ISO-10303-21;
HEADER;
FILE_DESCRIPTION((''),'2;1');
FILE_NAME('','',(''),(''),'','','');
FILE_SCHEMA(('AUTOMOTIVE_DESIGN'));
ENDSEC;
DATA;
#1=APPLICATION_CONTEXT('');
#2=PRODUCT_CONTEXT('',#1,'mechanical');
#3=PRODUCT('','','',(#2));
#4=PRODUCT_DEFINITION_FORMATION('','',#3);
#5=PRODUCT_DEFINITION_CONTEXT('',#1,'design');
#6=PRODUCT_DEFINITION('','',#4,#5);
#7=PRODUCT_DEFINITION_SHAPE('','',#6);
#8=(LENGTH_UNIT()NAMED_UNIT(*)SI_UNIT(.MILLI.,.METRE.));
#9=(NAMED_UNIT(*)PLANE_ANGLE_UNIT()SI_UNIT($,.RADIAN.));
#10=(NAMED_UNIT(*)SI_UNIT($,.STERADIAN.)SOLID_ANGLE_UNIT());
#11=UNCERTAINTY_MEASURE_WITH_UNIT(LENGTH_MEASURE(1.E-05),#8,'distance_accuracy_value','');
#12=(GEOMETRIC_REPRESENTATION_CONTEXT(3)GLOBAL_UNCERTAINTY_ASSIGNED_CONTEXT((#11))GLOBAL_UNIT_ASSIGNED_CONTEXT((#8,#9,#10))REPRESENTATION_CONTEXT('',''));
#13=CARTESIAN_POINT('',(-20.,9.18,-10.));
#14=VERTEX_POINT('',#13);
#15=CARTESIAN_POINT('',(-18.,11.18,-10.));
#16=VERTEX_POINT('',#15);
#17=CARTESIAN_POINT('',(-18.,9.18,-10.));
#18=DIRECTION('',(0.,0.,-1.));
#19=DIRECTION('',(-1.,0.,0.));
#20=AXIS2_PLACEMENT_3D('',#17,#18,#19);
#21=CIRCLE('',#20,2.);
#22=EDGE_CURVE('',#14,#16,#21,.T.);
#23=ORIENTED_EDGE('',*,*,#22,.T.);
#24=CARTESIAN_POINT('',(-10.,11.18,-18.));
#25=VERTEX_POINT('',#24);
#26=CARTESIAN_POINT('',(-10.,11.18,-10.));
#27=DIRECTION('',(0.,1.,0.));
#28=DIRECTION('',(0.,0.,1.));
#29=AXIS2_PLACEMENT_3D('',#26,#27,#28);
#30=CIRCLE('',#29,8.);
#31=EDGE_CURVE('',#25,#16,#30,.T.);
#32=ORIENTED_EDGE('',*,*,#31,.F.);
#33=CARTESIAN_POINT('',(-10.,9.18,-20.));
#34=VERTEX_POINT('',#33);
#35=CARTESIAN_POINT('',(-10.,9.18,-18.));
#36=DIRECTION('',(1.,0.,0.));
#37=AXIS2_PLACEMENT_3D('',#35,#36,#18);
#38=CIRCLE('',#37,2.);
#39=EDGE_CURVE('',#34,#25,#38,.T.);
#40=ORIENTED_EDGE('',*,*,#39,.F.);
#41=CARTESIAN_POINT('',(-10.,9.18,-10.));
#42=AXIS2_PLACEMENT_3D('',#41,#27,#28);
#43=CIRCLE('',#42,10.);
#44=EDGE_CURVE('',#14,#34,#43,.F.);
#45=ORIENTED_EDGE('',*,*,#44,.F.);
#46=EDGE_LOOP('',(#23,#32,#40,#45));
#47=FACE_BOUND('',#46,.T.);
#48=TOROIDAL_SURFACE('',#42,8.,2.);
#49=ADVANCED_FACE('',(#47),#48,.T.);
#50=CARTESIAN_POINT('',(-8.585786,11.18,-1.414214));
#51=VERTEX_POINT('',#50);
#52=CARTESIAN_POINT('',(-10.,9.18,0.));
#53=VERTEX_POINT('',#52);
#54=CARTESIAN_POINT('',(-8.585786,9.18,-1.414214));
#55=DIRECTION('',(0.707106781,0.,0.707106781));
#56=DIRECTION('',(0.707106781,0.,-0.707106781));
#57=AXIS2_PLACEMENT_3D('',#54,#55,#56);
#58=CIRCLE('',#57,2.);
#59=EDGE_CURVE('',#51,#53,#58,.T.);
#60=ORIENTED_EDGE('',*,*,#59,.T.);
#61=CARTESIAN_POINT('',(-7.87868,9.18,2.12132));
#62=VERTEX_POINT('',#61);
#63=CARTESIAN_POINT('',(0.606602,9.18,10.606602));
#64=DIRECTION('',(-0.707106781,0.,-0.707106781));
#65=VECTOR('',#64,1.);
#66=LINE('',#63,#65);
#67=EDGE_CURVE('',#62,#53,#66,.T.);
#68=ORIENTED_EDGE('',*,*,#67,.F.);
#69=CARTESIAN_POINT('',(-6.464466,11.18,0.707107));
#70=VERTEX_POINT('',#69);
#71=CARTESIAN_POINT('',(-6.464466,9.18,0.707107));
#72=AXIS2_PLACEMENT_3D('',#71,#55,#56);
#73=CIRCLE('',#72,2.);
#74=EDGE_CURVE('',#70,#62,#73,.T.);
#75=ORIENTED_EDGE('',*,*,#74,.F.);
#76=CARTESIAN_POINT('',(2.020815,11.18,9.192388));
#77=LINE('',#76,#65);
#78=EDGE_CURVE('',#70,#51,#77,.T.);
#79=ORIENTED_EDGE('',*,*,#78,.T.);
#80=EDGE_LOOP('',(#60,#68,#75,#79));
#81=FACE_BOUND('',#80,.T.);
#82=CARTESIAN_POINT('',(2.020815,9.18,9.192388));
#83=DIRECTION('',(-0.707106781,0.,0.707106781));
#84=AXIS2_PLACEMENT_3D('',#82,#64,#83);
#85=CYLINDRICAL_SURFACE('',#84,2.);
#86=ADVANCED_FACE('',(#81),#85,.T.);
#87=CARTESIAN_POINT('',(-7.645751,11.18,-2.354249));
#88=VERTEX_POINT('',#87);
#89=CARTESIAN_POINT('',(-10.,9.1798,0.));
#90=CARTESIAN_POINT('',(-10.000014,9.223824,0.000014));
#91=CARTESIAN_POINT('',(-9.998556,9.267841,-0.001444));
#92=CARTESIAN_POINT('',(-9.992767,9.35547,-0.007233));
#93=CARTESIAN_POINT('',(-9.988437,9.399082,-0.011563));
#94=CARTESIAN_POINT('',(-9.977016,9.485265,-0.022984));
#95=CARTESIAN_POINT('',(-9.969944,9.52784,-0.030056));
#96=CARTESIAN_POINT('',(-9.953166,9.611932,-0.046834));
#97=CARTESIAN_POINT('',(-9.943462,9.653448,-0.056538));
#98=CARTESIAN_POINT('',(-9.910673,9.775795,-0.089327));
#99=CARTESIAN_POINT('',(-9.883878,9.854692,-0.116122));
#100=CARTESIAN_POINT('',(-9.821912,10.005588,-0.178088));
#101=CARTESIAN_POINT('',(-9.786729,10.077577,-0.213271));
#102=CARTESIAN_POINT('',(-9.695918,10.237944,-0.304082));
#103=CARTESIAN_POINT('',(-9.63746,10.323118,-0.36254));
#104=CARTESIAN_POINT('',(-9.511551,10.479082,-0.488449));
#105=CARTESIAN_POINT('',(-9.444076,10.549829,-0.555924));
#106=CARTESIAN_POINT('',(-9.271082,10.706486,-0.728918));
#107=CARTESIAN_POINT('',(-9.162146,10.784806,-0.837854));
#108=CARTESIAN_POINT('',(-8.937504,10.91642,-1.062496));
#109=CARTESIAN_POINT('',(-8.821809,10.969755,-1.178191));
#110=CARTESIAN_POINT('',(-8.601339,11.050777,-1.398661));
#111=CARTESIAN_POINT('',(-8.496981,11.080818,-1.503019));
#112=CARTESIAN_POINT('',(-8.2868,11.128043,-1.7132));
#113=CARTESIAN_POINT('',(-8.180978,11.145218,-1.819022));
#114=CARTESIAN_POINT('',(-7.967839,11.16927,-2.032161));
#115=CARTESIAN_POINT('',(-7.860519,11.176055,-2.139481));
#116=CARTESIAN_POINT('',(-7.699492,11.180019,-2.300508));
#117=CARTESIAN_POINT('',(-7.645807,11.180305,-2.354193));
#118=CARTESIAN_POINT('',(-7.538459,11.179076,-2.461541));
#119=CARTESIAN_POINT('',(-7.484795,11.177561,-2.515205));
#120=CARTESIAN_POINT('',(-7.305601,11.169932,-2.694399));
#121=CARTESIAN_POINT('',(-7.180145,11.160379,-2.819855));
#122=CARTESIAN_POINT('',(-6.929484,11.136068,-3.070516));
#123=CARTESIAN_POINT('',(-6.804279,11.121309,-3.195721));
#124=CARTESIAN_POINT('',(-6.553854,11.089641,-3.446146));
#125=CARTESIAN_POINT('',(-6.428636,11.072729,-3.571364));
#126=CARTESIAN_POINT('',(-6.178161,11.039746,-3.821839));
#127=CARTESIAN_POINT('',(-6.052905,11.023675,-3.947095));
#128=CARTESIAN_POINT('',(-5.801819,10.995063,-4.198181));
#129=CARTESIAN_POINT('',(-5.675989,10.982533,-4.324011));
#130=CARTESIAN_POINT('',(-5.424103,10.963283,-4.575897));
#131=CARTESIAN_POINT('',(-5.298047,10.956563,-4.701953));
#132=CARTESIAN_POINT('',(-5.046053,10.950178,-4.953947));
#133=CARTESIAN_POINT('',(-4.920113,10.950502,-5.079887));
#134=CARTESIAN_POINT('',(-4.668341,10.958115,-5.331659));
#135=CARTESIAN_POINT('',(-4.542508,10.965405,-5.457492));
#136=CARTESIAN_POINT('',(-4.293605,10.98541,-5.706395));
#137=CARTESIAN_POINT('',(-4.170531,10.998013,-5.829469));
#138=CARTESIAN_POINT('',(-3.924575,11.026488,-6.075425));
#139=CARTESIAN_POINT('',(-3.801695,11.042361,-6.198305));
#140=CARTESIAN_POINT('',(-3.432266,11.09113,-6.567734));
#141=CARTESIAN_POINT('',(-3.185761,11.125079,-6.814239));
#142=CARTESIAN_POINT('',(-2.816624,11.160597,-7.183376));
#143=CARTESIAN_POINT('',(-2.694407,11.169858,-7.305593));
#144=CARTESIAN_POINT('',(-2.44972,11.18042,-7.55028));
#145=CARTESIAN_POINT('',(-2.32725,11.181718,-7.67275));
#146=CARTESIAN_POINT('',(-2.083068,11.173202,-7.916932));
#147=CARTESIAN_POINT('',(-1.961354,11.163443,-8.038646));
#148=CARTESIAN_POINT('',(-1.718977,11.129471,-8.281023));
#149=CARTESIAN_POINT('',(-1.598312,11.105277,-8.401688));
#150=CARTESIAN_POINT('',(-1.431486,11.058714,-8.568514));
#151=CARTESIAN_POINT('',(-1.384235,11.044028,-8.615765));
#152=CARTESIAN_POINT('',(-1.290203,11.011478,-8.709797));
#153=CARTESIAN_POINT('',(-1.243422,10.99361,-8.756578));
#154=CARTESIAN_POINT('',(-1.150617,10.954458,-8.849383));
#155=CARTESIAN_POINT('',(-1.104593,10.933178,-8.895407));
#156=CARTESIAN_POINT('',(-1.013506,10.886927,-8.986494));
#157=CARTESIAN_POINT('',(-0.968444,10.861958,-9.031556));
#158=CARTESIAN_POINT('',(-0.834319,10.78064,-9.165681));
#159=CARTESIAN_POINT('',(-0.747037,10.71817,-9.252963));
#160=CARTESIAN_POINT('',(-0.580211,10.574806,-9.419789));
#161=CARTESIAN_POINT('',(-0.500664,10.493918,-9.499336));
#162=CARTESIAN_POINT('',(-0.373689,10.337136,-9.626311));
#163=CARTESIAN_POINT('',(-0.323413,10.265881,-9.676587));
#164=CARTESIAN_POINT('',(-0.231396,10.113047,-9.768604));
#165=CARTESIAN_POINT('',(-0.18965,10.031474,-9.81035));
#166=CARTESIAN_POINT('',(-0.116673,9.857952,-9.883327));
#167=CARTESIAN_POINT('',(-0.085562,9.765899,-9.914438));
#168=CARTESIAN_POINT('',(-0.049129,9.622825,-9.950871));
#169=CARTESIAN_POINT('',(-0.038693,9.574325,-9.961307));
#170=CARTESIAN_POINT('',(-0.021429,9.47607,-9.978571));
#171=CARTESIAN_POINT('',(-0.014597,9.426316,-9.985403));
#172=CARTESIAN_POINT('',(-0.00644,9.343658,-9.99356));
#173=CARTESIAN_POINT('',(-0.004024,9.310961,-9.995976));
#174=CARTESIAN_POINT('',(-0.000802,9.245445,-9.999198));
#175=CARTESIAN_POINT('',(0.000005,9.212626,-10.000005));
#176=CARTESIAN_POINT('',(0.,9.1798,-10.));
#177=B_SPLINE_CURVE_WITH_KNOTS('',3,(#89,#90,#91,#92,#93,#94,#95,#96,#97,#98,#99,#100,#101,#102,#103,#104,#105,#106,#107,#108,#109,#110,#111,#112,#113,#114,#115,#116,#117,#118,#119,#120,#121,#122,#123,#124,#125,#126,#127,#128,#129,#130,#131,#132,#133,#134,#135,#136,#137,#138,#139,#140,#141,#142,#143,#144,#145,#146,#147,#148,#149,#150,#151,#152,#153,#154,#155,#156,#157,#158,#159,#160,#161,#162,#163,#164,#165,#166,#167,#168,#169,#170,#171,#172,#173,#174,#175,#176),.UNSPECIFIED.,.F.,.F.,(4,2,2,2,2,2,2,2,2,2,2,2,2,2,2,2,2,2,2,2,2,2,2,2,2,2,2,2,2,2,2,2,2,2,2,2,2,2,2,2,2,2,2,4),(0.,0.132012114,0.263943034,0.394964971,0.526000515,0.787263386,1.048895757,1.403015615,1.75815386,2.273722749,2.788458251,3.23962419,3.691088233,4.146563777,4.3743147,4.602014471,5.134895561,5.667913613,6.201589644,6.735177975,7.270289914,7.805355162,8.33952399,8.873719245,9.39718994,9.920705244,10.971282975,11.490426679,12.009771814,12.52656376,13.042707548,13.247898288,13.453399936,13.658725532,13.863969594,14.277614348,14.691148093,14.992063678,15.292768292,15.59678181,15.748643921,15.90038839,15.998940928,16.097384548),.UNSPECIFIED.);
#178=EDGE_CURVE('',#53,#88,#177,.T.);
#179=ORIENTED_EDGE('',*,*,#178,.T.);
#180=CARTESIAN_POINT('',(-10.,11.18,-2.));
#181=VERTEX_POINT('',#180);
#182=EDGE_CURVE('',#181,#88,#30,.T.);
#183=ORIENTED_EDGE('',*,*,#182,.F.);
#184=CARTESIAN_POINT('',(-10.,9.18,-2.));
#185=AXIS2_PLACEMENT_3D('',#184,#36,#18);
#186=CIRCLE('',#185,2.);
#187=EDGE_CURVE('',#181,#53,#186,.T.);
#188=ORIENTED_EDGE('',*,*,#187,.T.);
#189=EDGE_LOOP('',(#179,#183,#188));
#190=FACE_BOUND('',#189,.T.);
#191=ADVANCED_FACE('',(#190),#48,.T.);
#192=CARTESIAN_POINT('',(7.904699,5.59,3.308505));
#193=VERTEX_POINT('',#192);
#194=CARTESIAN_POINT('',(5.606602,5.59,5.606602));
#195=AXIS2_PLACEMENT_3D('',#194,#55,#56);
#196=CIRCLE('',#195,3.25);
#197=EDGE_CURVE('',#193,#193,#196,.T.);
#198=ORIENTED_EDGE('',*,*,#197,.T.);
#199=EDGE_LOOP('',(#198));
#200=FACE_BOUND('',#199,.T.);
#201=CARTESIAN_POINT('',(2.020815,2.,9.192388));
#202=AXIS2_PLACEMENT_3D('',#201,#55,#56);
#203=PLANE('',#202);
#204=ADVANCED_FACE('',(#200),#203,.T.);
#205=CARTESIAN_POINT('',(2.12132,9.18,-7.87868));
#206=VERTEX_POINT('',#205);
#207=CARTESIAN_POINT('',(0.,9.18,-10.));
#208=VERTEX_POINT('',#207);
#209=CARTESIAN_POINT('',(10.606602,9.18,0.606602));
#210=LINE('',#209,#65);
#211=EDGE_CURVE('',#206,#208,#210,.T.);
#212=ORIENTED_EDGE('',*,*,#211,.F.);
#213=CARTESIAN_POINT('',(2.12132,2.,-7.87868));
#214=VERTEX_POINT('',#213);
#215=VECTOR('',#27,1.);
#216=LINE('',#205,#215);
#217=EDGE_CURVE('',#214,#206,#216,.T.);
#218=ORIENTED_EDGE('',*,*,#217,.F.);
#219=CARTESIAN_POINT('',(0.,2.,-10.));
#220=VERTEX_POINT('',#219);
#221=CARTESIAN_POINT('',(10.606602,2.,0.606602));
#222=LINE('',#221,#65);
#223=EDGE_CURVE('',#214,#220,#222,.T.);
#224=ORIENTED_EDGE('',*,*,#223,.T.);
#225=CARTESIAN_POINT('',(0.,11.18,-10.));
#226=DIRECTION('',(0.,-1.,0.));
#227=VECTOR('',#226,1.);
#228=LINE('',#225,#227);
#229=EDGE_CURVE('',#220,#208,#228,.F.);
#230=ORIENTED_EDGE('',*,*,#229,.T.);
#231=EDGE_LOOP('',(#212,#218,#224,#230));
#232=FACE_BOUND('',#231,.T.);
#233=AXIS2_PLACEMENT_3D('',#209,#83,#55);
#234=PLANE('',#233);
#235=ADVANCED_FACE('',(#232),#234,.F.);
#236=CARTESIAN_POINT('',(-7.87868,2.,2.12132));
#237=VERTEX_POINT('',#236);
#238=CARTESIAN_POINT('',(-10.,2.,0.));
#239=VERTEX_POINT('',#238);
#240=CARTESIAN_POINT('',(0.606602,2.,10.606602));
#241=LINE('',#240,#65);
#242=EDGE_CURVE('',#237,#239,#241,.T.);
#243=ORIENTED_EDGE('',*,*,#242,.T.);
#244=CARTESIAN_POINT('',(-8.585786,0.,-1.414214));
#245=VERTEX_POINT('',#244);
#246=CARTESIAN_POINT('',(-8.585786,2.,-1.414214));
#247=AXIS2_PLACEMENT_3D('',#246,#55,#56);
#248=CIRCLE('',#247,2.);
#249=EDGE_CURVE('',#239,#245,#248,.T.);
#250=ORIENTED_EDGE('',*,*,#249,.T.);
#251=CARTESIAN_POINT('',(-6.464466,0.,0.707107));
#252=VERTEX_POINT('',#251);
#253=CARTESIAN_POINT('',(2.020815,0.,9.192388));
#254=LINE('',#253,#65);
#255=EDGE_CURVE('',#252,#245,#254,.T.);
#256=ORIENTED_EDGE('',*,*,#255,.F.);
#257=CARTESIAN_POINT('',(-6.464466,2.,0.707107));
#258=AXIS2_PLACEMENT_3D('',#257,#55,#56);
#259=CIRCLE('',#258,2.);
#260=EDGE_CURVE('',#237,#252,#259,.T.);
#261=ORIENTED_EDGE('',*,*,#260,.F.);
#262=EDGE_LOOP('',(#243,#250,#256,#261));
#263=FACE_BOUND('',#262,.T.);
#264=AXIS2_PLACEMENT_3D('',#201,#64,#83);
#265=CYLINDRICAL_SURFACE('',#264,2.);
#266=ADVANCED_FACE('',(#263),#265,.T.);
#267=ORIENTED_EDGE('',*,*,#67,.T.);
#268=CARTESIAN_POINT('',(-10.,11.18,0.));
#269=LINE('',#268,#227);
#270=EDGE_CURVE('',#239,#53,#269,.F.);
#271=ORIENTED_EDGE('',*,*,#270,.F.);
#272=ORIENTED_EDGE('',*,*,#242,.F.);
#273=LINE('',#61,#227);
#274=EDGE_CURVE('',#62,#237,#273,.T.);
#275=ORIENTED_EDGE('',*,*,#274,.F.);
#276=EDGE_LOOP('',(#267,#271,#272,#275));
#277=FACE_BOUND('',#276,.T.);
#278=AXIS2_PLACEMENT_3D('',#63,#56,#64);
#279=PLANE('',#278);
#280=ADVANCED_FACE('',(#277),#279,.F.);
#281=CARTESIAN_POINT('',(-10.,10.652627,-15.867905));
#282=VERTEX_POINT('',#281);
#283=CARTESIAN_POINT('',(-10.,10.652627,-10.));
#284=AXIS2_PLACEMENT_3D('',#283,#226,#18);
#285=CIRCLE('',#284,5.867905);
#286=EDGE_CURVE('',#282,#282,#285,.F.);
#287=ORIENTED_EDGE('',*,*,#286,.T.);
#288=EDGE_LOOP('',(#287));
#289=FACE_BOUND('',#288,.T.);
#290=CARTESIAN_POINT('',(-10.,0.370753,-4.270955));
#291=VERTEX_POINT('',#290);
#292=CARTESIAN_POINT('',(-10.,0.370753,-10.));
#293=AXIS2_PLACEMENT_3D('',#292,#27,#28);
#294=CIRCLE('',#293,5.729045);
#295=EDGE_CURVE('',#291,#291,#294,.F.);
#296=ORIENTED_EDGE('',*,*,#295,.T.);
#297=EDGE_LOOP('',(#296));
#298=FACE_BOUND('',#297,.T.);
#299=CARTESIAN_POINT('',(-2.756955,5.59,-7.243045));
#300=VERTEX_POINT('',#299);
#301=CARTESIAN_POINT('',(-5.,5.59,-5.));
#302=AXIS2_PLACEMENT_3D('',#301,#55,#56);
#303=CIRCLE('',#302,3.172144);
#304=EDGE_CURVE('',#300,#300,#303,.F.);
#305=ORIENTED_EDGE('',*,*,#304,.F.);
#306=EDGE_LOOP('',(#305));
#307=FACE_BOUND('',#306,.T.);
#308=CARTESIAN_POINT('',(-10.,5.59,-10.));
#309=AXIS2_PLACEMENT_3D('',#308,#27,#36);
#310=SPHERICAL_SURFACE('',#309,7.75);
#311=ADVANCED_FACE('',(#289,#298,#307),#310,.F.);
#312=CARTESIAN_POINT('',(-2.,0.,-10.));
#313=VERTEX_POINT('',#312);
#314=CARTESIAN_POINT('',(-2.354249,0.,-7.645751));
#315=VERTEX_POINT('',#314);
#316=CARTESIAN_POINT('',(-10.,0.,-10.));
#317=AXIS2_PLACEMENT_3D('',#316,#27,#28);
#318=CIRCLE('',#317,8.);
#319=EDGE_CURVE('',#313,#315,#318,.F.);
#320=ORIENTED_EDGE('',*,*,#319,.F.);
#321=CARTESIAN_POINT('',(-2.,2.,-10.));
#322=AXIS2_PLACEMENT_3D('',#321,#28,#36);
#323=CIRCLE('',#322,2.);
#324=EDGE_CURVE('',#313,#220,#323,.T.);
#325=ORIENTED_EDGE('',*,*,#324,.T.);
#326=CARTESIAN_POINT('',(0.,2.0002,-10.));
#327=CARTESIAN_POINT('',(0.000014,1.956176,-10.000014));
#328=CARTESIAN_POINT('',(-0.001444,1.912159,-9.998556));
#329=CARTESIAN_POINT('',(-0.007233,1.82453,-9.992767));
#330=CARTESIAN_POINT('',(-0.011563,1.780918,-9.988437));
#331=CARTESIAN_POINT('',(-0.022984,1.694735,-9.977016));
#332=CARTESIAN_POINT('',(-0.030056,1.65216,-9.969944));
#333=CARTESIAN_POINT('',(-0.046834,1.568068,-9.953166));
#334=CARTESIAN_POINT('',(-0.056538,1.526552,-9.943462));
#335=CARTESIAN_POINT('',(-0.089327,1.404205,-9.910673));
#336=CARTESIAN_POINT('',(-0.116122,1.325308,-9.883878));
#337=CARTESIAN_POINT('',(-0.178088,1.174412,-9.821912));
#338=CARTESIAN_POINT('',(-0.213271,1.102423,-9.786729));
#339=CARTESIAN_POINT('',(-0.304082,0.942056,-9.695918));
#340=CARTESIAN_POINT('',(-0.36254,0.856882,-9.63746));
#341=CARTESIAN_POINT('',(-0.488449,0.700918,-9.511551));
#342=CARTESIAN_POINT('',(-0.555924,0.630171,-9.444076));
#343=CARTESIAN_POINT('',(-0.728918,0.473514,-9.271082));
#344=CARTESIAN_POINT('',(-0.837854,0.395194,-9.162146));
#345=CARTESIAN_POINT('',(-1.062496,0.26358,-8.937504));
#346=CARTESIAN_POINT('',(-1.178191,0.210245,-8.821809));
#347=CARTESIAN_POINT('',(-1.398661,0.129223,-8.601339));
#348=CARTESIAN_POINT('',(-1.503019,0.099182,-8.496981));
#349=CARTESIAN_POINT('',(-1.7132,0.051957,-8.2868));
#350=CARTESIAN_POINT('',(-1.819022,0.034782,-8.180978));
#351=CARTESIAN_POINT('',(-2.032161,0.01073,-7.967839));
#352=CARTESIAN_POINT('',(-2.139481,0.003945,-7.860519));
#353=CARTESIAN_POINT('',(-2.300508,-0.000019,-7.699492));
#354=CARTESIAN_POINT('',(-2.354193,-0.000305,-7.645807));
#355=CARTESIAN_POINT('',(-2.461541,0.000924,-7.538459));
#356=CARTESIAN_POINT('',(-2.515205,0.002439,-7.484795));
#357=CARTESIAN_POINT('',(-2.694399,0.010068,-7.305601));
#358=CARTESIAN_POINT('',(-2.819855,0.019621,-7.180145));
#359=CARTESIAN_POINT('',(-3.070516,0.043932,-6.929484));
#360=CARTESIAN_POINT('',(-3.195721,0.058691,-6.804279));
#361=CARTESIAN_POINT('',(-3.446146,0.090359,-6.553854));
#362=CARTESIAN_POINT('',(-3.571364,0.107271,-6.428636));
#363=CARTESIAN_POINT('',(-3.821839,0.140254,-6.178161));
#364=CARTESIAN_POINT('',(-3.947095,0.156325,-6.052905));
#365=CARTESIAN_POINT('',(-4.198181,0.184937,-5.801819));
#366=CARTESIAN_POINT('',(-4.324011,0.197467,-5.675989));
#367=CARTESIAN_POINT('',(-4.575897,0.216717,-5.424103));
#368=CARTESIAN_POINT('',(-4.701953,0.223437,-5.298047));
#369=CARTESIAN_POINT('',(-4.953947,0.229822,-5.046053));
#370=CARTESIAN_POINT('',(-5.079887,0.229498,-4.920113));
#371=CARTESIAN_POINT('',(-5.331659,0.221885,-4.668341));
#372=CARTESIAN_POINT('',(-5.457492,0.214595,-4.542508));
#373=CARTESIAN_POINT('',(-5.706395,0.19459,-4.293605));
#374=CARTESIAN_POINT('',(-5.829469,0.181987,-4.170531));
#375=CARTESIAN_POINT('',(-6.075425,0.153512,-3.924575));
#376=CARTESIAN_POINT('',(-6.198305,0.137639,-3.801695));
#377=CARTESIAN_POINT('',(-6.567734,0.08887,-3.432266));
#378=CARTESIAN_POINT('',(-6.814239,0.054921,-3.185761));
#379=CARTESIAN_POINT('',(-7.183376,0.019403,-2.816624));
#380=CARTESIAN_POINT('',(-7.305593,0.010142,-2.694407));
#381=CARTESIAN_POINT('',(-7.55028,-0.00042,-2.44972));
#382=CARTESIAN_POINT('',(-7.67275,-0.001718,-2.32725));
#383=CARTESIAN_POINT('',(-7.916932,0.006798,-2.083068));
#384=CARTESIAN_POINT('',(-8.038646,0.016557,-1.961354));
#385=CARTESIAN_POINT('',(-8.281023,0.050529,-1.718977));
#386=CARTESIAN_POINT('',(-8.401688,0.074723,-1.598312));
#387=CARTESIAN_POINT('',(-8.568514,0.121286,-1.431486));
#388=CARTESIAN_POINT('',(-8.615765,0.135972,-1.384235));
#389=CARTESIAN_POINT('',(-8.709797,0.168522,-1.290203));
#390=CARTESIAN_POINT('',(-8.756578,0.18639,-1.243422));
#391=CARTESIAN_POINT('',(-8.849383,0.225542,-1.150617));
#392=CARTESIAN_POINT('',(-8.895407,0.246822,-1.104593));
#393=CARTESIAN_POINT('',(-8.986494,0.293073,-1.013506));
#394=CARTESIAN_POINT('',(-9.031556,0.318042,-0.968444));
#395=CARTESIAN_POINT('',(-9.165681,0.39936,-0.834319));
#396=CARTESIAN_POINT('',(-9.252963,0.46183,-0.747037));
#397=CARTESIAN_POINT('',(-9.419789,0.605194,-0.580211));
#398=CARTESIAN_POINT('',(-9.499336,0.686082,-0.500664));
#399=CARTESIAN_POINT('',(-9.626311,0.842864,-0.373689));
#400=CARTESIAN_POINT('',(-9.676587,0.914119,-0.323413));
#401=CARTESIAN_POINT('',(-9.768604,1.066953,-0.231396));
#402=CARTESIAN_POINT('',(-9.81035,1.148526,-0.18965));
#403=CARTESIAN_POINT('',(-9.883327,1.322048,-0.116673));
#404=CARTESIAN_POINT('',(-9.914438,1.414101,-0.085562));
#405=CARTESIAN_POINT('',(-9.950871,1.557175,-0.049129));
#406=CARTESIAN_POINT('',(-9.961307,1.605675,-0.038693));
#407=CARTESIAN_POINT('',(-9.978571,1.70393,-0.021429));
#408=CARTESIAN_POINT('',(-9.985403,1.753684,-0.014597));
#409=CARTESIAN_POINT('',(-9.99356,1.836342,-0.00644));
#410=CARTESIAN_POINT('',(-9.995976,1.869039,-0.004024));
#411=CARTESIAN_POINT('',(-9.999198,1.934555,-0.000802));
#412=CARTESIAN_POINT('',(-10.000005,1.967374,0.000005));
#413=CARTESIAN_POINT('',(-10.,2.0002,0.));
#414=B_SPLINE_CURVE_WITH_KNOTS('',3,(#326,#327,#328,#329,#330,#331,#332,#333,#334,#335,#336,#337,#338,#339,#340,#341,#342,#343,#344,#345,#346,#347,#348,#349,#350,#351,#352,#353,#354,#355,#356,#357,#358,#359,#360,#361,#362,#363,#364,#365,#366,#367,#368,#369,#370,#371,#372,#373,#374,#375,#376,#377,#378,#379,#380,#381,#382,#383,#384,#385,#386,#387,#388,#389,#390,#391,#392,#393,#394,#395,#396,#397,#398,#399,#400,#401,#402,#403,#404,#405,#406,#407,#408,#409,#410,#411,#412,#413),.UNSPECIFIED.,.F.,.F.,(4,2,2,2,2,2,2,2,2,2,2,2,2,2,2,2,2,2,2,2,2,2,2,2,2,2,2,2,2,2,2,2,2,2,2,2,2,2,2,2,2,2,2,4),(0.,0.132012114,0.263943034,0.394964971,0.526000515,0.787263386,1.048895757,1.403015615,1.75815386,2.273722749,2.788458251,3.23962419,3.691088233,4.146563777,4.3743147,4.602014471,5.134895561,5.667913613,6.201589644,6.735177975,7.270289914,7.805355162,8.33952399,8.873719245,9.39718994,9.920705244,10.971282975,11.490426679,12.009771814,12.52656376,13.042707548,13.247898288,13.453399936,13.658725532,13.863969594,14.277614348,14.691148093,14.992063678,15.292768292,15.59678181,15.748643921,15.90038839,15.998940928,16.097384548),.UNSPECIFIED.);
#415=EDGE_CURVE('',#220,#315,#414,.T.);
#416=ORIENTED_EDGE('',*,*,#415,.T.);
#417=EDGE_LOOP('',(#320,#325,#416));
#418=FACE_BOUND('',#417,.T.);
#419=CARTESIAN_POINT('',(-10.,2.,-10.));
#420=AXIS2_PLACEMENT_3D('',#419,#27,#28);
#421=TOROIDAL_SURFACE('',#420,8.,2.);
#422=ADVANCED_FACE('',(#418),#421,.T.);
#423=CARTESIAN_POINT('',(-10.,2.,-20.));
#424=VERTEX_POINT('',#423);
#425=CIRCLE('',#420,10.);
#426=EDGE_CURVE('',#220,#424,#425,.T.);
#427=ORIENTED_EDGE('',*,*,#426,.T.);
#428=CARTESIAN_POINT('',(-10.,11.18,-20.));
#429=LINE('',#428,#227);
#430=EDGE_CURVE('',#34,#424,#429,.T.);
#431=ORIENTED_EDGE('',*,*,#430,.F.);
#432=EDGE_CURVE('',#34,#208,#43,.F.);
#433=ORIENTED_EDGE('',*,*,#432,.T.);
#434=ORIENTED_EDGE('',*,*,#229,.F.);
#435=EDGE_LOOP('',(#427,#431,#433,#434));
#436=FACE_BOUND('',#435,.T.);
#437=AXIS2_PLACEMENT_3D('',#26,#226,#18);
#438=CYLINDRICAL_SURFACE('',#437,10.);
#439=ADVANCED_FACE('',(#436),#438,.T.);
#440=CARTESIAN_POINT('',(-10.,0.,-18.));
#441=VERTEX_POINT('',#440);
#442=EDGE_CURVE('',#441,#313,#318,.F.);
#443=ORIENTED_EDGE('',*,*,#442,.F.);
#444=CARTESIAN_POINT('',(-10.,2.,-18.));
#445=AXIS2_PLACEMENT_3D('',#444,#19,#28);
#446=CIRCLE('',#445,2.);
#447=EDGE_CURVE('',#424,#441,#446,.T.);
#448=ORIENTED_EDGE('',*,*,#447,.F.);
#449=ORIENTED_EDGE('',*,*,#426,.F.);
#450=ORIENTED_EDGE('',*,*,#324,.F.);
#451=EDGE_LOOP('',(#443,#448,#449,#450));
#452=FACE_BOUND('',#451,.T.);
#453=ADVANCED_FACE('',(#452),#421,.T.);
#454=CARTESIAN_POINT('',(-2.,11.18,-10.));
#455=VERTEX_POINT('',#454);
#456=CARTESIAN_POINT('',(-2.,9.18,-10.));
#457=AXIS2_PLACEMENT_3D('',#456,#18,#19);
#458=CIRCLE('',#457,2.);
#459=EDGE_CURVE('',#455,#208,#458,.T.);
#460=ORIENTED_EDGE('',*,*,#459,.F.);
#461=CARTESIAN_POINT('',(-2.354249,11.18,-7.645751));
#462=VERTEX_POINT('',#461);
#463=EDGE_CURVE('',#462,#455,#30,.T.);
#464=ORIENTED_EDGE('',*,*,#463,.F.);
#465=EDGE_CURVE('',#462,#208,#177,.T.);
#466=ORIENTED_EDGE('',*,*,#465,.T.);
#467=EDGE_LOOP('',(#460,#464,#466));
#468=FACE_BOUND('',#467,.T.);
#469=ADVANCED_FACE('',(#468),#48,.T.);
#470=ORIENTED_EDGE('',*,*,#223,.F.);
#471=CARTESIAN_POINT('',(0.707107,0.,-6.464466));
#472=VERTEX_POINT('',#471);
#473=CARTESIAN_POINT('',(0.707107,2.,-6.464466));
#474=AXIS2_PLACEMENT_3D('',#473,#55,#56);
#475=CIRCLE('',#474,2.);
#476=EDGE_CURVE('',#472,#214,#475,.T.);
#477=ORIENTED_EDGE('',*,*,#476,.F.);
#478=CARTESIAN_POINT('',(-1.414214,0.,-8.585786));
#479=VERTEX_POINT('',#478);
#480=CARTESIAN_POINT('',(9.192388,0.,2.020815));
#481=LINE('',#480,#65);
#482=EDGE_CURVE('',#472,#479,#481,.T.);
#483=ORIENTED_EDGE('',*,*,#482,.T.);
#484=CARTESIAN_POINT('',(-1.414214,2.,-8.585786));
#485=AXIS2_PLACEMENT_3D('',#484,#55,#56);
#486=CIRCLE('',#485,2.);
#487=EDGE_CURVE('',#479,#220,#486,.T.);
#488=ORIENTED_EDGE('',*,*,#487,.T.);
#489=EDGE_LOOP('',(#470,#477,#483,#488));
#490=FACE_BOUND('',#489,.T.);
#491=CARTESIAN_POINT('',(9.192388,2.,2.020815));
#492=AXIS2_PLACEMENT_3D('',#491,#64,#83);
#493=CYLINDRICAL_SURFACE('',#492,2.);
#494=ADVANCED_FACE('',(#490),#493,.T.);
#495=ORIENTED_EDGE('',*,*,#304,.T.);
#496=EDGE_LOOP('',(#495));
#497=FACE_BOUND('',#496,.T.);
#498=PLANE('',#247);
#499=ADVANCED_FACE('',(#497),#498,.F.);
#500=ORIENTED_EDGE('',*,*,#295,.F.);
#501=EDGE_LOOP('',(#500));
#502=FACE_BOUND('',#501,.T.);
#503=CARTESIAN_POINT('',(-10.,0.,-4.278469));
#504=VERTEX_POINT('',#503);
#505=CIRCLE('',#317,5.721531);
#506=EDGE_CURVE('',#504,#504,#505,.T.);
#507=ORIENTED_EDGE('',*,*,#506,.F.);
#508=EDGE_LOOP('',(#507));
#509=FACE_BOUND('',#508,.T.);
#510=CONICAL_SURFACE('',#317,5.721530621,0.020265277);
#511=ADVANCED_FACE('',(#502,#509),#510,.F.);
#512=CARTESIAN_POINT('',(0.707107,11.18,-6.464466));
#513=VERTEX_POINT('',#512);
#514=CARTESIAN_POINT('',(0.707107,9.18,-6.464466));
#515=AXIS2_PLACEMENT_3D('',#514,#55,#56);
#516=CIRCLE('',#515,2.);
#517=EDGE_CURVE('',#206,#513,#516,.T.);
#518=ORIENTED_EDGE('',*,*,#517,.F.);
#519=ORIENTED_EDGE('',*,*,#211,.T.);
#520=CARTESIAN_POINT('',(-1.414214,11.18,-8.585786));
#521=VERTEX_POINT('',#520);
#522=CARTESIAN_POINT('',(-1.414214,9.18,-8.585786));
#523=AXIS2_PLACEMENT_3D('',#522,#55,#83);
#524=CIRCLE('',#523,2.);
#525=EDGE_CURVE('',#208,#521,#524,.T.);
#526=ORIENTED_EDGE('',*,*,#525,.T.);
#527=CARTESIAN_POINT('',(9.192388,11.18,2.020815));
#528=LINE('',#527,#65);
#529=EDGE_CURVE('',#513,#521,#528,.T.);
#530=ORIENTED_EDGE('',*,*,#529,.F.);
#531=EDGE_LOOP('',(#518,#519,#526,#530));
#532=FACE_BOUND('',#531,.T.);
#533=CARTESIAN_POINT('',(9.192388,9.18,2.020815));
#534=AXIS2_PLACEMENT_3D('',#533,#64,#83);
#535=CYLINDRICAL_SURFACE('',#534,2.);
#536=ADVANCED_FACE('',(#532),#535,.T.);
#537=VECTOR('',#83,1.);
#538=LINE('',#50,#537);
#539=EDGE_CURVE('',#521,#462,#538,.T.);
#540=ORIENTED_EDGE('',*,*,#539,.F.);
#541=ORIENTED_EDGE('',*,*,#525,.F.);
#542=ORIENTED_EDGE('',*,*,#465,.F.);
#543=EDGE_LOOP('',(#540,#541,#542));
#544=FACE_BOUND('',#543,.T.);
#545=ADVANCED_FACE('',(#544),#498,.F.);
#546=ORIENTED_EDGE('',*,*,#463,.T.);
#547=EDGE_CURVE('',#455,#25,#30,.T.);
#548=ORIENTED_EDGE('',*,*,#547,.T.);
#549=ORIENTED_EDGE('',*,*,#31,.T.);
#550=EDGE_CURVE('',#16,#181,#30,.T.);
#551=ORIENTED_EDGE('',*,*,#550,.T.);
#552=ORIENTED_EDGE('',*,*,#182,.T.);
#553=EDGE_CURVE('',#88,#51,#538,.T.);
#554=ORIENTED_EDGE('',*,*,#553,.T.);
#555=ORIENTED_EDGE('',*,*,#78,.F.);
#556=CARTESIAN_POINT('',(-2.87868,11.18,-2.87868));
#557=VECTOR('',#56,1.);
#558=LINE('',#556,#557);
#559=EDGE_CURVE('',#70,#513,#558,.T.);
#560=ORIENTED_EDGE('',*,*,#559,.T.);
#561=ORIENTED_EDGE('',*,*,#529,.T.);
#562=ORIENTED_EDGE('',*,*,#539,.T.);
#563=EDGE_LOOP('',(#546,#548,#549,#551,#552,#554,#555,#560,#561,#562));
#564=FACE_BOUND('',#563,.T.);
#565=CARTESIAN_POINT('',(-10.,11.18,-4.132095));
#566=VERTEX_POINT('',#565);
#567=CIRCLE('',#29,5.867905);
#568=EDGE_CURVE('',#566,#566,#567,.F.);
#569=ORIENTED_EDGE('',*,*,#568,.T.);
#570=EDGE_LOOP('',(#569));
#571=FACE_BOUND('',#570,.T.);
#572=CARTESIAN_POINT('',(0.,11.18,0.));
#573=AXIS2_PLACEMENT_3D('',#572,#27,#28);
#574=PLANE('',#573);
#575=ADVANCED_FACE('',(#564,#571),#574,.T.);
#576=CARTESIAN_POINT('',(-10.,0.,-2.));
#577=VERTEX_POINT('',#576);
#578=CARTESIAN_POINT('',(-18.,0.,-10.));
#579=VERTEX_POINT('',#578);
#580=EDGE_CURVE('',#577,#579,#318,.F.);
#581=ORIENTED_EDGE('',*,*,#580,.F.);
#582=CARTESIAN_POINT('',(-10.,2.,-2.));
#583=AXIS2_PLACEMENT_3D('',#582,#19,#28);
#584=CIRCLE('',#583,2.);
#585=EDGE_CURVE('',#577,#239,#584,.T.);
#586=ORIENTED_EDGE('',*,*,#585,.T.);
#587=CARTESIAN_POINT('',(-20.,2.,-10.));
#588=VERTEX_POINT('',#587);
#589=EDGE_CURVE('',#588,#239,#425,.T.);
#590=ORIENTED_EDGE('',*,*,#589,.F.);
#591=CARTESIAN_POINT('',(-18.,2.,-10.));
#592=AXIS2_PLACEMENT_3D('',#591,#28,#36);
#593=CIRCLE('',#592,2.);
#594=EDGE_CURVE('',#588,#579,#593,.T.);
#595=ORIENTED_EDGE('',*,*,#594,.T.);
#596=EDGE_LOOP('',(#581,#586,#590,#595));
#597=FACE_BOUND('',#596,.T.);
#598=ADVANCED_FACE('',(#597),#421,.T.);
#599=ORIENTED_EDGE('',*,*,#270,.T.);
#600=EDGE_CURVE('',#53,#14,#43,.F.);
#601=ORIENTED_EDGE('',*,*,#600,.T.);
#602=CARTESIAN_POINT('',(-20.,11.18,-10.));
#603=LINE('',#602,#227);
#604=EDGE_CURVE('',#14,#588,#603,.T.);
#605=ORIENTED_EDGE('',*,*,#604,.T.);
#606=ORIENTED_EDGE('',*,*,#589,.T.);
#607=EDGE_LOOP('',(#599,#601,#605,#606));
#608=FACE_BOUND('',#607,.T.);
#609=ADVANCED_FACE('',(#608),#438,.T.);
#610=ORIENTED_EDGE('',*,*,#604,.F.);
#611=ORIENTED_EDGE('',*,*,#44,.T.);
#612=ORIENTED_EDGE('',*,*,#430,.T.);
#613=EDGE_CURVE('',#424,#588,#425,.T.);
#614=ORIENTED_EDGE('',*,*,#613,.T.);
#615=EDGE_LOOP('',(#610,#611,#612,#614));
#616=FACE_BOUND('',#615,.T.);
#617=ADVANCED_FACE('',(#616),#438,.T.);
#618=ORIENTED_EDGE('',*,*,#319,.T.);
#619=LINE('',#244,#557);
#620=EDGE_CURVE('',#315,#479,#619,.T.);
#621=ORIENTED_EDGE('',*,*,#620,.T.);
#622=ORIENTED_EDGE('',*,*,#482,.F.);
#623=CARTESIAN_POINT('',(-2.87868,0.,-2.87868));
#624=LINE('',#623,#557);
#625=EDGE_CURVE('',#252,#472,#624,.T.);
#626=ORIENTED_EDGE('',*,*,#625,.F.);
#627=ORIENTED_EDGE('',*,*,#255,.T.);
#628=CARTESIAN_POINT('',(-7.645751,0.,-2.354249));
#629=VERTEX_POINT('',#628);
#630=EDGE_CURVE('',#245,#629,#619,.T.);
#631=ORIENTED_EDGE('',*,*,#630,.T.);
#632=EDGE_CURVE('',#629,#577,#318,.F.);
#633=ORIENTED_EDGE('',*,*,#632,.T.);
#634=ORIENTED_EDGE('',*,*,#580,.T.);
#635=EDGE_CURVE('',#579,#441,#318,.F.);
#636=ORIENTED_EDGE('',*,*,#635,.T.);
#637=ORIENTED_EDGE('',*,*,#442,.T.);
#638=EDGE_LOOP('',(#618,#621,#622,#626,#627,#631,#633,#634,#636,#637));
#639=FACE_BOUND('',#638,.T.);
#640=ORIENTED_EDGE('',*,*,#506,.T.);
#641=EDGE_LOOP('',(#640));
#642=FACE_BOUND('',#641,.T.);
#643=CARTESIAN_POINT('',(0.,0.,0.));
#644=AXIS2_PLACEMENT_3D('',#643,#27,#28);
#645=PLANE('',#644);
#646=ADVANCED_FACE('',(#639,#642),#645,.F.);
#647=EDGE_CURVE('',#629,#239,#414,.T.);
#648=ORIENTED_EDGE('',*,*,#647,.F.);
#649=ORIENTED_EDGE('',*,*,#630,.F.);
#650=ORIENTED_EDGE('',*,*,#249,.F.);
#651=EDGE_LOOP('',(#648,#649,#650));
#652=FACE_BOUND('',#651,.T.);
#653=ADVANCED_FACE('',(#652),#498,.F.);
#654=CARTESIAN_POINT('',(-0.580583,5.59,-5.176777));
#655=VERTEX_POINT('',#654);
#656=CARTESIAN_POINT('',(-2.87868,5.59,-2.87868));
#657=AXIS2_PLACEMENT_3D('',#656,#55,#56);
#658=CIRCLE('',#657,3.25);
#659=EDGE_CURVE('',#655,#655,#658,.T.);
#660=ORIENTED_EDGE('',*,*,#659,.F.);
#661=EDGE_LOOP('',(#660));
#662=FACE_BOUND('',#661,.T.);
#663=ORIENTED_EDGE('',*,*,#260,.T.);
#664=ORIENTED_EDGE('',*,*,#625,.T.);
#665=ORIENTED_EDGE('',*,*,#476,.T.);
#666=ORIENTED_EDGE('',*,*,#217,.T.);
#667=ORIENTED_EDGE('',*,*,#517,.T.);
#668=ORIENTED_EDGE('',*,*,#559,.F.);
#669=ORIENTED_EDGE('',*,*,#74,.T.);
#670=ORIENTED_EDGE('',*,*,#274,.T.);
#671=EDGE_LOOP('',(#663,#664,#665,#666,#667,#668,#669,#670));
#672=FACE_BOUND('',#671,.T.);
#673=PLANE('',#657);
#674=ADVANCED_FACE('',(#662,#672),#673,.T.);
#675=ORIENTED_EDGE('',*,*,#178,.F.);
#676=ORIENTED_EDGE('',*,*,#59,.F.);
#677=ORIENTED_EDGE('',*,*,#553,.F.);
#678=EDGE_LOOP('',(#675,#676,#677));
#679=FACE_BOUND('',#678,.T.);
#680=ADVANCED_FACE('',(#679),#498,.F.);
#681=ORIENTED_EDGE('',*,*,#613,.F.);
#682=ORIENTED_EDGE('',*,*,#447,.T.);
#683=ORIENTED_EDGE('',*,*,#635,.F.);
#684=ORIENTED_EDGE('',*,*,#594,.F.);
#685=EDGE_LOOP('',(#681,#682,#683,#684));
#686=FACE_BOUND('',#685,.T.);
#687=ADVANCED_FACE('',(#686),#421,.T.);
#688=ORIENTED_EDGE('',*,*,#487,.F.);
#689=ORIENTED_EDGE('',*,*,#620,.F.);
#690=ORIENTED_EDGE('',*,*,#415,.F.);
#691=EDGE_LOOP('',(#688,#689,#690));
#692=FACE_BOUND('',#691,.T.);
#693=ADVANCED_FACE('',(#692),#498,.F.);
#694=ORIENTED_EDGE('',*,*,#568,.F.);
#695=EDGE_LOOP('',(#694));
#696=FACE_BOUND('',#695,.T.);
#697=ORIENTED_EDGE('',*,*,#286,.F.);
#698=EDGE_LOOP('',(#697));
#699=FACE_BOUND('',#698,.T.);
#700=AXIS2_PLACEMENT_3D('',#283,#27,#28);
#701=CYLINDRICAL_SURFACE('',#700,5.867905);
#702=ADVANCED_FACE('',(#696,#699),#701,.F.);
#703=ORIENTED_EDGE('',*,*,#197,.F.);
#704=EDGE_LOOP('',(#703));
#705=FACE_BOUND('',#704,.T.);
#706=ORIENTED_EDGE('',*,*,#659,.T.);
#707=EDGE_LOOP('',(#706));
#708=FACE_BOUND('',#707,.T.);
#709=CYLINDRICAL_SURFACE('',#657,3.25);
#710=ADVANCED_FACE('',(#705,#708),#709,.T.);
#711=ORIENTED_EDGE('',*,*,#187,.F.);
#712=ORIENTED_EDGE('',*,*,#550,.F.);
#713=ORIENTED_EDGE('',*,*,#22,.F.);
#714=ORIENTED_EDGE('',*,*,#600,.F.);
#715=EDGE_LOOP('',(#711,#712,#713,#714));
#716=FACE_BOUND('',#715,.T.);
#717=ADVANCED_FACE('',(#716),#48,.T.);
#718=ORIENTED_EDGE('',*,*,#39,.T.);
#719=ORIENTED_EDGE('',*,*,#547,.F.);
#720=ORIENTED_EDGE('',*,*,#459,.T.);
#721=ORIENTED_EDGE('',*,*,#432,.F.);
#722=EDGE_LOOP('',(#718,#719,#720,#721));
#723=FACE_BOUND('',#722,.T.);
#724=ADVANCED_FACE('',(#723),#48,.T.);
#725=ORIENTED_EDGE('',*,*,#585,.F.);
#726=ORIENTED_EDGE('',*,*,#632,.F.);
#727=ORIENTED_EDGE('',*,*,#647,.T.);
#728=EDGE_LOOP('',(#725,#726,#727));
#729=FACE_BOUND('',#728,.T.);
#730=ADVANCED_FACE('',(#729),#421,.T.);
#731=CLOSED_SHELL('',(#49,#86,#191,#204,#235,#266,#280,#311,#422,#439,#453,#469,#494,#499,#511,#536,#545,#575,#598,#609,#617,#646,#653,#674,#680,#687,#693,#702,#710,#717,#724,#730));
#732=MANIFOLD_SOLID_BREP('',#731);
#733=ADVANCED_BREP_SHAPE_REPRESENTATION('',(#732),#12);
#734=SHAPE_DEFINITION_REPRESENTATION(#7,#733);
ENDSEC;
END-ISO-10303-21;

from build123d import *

# Parameters (mm, degrees)
SKETCH1_W           = 20
SKETCH1_H           = 20
BOSS_EXTRUDE1_DEPTH = 11.18
FILLET1_R           = 10
FILLET2_R           = 2
BOSS_EXTRUDE2_DEPTH = 15
SKETCH5_OUTSIDE_W   = 54.224
SKETCH5_OUTSIDE_H   = 22.12
SKETCH5_OUTSIDE_R   = 3.25
CUT_EXTRUDE1_DEPTH  = 12
CHAMFER1_SIZE       = 0.5
CHAMFER2_SIZE       = 0.353626002


# Some blends are built 0.0001 mm under size
with BuildPart() as part:
    # Sketch1 → Boss-Extrude1 (new body)
    with BuildSketch(Plane(origin=(0, 0, 0), x_dir=(1, 0, 0), z_dir=(0, 1, 0))):
        with Locations((-10, 10)):
            Rectangle(SKETCH1_W, SKETCH1_H)
    extrude(amount=BOSS_EXTRUDE1_DEPTH)

    # Sketch2 → Cut-Revolve1 (revolve, cut)
    with BuildSketch(Plane.XY.offset(-10)):
        with BuildLine():
            Line((-10, 13.34), (-10, -2.16))
            ThreePointArc((-10, -2.16), (-17.75, 5.59), (-10, 13.34))
        make_face()
    revolve(axis=Axis((-10, 13.34, -10), (0, -1, 0)), mode=Mode.SUBTRACT)

    # Fillet1
    fillet1_edges = [part.edges().sort_by_distance(p)[0] for p in [
        (-20, 5.59, 0),
        (-20, 5.59, -20),
        (0, 5.59, -20),
        (0, 5.59, 0),
    ]]
    fillet(fillet1_edges, radius=FILLET1_R - 0.0001)  # a hair under: the kernel refuses the full size

    # Fillet2
    fillet2_edges = [part.edges().sort_by_distance(p)[0] for p in [
        (-2.928902899, 0, -2.928902899),
        (-2.928902899, 0, -17.071097101),
        (-17.071097101, 0, -17.071097101),
        (-17.071097101, 0, -2.928902899),
        (-2.928902899, 11.18, -2.928902899),
        (-2.928902899, 11.18, -17.071097101),
        (-17.071097101, 11.18, -17.071097101),
        (-17.071097101, 11.18, -2.928902899),
    ]]
    fillet(fillet2_edges, radius=FILLET2_R)

    # Sketch4 → Boss-Extrude2 (add)
    with BuildSketch(Plane(origin=(-5, 0, -5), x_dir=(0.7071067811865474, 0, -0.7071067811865477), z_dir=(0.7071067811865477, 0, 0.7071067811865474))):
        with BuildLine():
            Line((-5.071067812, 11.18), (5.071067812, 11.18))
            ThreePointArc((5.071067812, 11.18), (6.485281374, 10.594213562), (7.071067812, 9.18))
            Line((7.071067812, 9.18), (7.071067812, 2))
            ThreePointArc((7.071067812, 2), (6.485281374, 0.585786438), (5.071067812, 0))
            Line((5.071067812, 0), (-5.071067812, 0))
            ThreePointArc((-5.071067812, 0), (-6.485281374, 0.585786438), (-7.071067812, 2))
            Line((-7.071067812, 2), (-7.071067812, 9.18))
            ThreePointArc((-7.071067812, 9.18), (-6.485281374, 10.594213562), (-5.071067812, 11.18))
        make_face()
    extrude(amount=BOSS_EXTRUDE2_DEPTH)

    # Sketch5 outside → Cut-Extrude1 (cut)
    with BuildSketch(Plane(origin=(5.606601718, 0, 5.606601718), x_dir=(0.7071067811865474, 0, -0.7071067811865477), z_dir=(0.7071067811865477, 0, 0.7071067811865474))):
        with Locations((0, 5.59)):
            Rectangle(SKETCH5_OUTSIDE_W, SKETCH5_OUTSIDE_H)
        with Locations((0, 5.59)):
            Circle(SKETCH5_OUTSIDE_R, mode=Mode.SUBTRACT)
    extrude(amount=-CUT_EXTRUDE1_DEPTH, mode=Mode.SUBTRACT)

    # Chamfer1
    # the kernel refuses this chamfer: 0.693202147, 0.5 mm, written as the material it takes off along each edge
    with BuildSketch(Plane(origin=(-10, 11.18, -10), x_dir=(-1, 0, 0), z_dir=(0, 0, -1))) as chamfer1_piece_1:
        with BuildLine():
            Line((5.867904619, -0.52737268), (5.367904619 + CHAMFER1_SIZE, 0))
            Line((5.367904619 + CHAMFER1_SIZE, 0), (5.367904619, 0))
            ThreePointArc((5.367904619, 0), (5.631023098, -0.265145178), (5.867904619, -0.52737268))
        make_face()
    revolve(axis=Axis((-10, 11.18, -10), (0, 1, 0)), mode=Mode.SUBTRACT)

    # Chamfer2
    # the kernel refuses this chamfer: 0.5, 0.353626002 mm, written as the material it takes off along each edge
    with BuildSketch(Plane(origin=(-10, 0, -10), x_dir=(-1, 0, 0), z_dir=(0, 0, -1))) as chamfer2_piece_1:
        with BuildLine():
            Line((5.367904619 + CHAMFER2_SIZE, 0), (5.729045055, 0.370752664))
            ThreePointArc((5.729045055, 0.370752664), (5.556671492, 0.187602206), (5.367904619, 0))
            Line((5.367904619, 0), (5.367904619 + CHAMFER2_SIZE, 0))
        make_face()
    revolve(axis=Axis((-10, 0, -10), (0, 1, 0)), mode=Mode.SUBTRACT)


solid = part.part
